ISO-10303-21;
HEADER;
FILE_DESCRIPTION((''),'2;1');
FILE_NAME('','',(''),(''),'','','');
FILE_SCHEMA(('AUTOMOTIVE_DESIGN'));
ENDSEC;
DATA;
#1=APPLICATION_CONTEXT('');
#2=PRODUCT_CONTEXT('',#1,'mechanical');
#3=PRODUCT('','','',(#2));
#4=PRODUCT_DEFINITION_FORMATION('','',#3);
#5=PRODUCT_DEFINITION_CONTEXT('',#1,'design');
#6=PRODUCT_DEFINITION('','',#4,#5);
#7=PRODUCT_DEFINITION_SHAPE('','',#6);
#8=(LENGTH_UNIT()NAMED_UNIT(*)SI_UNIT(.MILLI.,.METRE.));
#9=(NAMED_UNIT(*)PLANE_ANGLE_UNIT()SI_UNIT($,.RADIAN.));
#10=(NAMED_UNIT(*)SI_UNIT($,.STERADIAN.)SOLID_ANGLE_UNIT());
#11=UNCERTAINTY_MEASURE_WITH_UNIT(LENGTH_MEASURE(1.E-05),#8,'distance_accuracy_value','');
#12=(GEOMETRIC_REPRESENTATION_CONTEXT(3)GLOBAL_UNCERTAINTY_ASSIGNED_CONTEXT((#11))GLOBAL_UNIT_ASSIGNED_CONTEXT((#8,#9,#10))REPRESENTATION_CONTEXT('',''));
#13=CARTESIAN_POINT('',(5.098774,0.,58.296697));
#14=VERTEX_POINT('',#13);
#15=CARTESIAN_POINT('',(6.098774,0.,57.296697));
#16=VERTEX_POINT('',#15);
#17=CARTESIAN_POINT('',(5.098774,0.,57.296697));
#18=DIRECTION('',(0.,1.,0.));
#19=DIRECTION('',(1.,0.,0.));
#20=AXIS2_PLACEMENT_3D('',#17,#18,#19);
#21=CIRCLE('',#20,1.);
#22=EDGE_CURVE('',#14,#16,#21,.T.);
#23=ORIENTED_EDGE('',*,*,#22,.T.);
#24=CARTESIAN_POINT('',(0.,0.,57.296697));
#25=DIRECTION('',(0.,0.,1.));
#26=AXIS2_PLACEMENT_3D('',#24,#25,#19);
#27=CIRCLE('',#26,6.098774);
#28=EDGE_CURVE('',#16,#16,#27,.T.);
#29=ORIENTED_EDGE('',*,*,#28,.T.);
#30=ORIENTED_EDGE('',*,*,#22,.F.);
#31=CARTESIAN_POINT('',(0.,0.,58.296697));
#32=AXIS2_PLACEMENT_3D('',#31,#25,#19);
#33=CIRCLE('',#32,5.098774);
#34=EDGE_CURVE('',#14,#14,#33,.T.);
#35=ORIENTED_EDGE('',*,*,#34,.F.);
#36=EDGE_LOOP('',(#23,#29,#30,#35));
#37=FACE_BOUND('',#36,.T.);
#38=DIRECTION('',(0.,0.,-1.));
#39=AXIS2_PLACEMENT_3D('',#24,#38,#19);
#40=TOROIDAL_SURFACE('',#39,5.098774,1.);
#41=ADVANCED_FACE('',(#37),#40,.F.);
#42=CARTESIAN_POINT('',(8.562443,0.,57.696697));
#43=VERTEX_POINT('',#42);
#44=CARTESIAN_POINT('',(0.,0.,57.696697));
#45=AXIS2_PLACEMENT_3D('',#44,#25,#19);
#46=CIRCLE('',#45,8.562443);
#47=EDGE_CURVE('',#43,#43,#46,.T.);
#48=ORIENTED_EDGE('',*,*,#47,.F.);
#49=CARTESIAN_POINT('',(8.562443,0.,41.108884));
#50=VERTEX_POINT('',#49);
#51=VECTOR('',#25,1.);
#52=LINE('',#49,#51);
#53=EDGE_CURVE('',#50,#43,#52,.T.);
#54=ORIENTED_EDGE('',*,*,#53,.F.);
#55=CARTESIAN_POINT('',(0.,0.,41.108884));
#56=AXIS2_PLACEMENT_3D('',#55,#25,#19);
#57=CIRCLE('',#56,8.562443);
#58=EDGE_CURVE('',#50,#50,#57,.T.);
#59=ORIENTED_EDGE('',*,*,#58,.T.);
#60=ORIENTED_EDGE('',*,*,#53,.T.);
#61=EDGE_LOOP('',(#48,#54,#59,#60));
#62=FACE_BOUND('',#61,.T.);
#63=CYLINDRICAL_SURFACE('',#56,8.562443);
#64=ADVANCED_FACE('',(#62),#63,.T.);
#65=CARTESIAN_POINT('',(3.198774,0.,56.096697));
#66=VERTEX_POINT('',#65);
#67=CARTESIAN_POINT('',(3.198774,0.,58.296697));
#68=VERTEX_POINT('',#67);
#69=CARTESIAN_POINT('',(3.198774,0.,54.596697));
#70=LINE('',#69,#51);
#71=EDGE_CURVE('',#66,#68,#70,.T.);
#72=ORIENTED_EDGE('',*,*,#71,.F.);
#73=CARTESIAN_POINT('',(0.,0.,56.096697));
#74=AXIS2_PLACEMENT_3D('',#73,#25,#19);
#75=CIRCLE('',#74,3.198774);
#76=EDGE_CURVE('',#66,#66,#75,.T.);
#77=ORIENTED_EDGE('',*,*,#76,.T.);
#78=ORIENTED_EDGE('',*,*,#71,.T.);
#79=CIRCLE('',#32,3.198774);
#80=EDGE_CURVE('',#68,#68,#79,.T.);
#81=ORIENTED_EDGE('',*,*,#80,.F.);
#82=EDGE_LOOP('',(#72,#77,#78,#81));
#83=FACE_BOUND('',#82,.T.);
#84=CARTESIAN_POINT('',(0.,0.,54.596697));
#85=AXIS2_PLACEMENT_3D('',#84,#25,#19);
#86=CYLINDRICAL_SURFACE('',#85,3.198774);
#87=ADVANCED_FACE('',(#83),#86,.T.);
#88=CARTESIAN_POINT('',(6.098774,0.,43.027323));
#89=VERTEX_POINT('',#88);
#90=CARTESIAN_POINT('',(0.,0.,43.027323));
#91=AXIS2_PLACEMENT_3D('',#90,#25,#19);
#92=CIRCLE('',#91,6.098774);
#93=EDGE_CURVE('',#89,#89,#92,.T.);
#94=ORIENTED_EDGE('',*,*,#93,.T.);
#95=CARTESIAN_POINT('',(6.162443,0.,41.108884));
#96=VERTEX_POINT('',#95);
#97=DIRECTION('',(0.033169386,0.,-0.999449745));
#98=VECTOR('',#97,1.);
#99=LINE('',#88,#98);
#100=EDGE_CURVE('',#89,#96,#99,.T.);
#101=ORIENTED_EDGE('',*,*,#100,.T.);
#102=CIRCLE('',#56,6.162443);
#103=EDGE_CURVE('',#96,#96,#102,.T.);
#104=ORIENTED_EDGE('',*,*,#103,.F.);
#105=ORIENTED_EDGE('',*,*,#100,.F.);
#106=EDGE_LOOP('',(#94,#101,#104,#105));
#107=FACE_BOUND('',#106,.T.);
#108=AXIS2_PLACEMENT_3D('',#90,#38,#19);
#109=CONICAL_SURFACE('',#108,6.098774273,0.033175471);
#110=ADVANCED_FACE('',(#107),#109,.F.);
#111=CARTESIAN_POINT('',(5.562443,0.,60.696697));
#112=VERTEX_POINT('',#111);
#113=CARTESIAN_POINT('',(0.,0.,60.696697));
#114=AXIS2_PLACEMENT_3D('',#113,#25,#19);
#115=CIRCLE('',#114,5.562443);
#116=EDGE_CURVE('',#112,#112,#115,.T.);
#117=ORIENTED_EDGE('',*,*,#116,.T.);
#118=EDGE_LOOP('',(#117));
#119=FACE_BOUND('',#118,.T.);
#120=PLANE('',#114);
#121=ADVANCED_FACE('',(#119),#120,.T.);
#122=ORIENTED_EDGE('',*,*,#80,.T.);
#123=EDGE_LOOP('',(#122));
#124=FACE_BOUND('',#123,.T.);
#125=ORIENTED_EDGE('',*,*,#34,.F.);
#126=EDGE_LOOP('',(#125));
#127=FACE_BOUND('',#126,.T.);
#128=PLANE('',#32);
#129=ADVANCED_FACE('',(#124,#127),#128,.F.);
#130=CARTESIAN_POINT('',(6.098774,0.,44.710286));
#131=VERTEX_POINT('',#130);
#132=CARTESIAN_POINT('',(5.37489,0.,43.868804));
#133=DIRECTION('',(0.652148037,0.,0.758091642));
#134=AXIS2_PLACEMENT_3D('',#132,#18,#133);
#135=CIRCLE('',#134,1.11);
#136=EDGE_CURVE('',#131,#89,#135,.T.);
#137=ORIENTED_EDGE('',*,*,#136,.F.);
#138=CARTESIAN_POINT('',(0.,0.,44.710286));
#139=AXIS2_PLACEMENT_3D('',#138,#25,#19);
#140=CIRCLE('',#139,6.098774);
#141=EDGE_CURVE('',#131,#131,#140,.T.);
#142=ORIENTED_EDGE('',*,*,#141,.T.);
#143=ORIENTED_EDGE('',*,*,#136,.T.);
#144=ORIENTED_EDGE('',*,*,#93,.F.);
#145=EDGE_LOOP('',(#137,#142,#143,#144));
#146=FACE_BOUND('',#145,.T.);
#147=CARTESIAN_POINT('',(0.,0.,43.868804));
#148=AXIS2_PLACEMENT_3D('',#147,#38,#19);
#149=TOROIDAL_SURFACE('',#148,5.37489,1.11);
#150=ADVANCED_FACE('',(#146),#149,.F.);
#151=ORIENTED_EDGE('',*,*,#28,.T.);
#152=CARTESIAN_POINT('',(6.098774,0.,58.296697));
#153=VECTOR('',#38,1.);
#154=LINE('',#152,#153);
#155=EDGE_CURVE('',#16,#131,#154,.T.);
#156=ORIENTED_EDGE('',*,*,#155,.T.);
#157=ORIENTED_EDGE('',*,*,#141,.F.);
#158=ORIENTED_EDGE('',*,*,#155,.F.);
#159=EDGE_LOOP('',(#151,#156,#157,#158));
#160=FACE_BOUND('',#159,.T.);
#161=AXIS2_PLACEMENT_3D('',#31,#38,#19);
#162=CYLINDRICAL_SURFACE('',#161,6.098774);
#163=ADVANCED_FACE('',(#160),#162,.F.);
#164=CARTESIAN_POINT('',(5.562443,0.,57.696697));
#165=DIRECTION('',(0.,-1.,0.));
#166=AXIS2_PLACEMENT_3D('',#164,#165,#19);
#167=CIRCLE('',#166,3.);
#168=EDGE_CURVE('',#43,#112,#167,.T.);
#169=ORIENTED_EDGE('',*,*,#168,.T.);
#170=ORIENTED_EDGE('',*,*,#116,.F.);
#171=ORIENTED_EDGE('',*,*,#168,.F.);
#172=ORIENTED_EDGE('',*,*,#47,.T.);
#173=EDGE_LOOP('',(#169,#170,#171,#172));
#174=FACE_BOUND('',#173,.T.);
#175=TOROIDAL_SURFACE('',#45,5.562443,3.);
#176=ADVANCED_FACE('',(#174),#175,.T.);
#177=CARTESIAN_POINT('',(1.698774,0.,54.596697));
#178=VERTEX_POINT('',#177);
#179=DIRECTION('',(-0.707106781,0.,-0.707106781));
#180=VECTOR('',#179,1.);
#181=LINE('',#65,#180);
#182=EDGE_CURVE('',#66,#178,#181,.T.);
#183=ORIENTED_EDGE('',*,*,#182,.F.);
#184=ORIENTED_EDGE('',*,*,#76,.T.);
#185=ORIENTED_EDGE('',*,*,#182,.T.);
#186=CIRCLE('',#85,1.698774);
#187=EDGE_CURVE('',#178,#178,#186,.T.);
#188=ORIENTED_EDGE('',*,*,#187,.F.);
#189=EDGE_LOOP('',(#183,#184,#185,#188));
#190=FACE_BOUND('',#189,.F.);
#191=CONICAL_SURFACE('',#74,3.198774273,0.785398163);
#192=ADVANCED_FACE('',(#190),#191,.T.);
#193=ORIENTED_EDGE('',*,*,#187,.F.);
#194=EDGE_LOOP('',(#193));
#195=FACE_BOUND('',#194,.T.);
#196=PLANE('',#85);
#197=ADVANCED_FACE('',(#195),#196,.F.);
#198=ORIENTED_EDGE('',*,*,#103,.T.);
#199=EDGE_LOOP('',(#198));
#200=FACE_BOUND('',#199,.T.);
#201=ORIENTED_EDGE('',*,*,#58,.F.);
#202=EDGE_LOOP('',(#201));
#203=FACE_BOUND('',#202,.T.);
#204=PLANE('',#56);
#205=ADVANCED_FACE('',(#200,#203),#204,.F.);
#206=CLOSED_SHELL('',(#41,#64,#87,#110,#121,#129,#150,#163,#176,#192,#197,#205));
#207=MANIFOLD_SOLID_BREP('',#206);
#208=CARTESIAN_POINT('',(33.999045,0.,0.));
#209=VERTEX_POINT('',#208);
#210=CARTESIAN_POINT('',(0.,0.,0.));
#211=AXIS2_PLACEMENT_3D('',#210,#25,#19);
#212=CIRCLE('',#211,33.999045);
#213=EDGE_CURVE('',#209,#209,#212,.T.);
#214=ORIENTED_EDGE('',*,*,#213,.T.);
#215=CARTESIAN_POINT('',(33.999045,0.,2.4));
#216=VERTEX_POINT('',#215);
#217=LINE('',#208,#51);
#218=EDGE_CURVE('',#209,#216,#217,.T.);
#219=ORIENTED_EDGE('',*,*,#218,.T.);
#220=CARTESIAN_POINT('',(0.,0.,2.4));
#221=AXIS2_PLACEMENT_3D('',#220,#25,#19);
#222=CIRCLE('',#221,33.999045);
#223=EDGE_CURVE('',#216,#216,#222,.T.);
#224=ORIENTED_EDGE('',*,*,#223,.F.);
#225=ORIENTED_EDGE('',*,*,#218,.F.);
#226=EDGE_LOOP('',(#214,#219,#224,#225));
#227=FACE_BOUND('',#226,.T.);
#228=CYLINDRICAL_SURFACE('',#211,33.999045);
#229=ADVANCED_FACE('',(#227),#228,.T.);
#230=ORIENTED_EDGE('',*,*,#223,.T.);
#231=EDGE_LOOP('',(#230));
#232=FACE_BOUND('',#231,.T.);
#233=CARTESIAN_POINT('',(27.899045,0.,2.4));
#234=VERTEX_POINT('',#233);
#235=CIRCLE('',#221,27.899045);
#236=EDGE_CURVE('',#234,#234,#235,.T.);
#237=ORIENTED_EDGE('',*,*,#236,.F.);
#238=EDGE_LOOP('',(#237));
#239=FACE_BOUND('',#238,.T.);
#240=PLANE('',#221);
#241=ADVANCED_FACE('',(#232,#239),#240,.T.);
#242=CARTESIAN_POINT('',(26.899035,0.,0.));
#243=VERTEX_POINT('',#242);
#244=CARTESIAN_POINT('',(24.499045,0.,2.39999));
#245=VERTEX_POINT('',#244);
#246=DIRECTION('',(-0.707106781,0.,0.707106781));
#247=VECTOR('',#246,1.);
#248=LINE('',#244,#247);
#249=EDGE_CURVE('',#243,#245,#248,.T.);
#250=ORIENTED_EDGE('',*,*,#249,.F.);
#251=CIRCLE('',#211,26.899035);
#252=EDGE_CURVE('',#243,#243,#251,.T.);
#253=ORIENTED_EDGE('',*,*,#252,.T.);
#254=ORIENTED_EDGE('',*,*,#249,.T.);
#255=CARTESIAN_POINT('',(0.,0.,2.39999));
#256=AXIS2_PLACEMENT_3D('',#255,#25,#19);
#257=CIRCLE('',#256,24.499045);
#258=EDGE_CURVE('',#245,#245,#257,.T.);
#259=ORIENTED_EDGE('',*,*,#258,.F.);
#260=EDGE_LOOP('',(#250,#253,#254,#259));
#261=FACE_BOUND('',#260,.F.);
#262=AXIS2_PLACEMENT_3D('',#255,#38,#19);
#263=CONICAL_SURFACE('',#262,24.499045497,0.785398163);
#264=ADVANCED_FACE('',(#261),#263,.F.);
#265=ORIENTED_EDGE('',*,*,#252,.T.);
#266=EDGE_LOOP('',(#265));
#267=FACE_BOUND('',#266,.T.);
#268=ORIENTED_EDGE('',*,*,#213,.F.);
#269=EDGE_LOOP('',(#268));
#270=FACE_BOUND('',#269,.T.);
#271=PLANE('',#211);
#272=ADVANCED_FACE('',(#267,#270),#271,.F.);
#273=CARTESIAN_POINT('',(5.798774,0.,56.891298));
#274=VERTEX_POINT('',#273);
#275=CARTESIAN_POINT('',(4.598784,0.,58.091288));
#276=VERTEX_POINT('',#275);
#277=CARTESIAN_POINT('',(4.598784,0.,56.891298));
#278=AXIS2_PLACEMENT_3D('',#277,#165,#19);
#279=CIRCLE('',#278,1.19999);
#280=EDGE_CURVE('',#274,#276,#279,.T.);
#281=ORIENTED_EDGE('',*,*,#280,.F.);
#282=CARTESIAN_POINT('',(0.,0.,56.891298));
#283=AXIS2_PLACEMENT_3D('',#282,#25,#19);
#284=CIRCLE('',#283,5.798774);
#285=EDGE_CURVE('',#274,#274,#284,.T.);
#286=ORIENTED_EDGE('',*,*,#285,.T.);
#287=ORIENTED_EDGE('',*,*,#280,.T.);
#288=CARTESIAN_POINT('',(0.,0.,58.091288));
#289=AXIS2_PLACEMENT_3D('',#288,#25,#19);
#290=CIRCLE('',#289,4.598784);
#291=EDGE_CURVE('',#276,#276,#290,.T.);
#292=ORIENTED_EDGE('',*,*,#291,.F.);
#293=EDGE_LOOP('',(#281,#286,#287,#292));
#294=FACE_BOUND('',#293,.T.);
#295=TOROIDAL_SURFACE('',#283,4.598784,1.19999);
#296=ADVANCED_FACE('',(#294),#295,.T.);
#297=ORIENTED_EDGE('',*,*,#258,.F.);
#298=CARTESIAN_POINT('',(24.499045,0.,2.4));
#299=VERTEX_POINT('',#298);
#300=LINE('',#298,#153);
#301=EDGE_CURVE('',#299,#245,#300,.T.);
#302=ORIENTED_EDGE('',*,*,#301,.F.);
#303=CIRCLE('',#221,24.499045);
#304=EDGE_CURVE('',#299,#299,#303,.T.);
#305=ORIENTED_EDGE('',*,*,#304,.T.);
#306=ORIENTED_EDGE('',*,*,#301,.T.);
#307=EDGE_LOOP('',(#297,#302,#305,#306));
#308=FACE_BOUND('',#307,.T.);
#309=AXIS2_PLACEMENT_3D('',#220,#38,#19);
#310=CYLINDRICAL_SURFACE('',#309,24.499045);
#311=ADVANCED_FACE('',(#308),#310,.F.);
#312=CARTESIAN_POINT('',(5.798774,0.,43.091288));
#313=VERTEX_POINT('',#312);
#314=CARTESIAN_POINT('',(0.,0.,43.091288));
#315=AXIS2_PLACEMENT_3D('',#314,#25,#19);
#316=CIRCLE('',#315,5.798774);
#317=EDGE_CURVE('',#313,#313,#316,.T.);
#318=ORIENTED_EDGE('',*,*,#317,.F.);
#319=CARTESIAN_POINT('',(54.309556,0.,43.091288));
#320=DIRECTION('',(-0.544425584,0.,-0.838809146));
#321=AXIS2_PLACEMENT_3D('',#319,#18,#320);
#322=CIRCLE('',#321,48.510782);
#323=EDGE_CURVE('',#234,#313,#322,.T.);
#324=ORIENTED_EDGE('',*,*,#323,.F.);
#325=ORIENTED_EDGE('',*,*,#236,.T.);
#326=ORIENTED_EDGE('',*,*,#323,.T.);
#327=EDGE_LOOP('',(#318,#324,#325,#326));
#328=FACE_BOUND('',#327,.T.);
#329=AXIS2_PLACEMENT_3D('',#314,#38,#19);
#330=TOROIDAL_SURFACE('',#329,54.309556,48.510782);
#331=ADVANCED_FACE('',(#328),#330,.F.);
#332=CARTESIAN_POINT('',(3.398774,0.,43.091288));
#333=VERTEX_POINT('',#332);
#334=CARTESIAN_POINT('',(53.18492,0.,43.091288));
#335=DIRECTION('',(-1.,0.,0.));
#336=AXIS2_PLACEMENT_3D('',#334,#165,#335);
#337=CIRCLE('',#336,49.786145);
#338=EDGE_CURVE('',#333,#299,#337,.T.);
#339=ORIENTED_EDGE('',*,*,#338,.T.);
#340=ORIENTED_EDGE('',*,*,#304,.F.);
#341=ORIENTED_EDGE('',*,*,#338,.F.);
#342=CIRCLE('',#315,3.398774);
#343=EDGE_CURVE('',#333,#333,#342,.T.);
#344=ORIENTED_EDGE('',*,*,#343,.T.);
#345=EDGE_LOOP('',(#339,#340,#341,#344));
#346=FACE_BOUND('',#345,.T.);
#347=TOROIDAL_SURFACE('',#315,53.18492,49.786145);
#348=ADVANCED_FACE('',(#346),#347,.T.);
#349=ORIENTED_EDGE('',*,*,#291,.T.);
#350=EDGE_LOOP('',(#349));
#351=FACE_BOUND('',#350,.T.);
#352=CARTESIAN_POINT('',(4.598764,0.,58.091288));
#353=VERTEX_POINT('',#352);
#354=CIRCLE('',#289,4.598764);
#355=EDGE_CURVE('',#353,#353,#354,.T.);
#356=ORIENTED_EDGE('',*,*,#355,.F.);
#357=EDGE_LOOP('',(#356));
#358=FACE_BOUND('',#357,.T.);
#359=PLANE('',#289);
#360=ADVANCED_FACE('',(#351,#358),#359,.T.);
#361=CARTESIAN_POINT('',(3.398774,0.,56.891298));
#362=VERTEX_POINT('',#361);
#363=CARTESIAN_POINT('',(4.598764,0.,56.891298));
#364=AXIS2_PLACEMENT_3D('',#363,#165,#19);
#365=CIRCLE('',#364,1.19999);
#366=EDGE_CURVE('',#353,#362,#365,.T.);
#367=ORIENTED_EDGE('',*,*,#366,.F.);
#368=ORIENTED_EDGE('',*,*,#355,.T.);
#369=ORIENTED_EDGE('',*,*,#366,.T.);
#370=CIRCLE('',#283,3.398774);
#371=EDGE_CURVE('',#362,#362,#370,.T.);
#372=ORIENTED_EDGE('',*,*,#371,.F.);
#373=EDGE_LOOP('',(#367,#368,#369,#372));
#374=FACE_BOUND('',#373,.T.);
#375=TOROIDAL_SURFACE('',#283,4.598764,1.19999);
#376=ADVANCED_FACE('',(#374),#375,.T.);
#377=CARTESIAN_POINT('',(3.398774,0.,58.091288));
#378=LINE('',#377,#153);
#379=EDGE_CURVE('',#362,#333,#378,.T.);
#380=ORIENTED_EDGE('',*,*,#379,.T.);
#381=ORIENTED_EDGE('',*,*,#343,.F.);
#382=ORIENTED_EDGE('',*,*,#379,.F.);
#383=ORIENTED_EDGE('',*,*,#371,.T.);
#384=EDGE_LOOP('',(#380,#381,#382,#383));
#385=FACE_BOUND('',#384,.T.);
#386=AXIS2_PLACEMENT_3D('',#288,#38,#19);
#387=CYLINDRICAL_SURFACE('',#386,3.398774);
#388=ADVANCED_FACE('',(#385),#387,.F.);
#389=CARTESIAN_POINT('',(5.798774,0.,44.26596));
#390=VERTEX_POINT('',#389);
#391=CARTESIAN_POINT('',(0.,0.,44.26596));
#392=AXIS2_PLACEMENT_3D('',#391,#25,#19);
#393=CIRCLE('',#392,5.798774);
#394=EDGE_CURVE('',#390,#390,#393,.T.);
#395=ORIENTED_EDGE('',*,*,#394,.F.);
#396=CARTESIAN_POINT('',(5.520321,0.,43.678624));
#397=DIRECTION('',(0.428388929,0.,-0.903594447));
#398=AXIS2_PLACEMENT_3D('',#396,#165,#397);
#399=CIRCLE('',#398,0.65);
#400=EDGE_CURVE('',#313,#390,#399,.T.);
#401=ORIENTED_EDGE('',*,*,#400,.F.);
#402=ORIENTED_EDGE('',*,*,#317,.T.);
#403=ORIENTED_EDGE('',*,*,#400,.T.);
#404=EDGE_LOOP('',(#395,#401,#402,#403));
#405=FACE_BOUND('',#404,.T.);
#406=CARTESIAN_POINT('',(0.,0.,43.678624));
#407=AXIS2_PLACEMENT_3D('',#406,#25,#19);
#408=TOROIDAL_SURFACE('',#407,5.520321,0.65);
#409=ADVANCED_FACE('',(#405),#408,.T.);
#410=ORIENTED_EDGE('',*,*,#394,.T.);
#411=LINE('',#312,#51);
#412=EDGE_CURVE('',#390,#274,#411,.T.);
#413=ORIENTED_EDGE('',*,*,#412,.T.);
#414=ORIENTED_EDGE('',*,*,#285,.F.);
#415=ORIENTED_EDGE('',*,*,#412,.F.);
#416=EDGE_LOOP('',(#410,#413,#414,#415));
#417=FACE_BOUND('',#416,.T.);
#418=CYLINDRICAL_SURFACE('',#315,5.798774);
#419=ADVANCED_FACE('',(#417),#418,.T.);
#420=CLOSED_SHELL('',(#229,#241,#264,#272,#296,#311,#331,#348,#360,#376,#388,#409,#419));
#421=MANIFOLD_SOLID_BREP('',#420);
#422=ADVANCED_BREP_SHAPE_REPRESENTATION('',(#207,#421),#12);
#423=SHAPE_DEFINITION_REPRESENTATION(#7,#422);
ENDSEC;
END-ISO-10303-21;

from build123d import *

# Parameters (mm, degrees)
F2_R    = 1.19999
F5_R    = 3
F6_SIZE = 1.5
F7_SIZE = 2.39999
F8_R    = 1


# Not quite as in the source:
# - a fillet or chamfer is up to 0.001 mm smaller than in the source, because OpenCascade refuses the exact size
# - a feature names something its author has since deleted; it is built from what else it names


with BuildPart() as f1:
    # F0 (on Front) → F1 (revolve)
    with BuildSketch(Plane.XZ):
        with BuildLine():
            Line((24.4990454972, 2.4), (24.4990454972, 0))
            Line((24.4990454972, 0), (33.9990454972, 0))
            Line((33.9990454972, 0), (33.9990454972, 2.4))
            Line((33.9990454972, 2.4), (27.8990454972, 2.4))
            ThreePointArc((27.8990454972, 2.4), (11.680396645, 19.9385185195), (5.7987742726, 43.0912876998))
            Line((5.7987742726, 43.0912876998), (5.7987742726, 44.2659604814))
            Line((5.7987742726, 44.2659604814), (5.7987742726, 58.0912876998))
            Line((5.7987742726, 58.0912876998), (3.3987742726, 58.0912876998))
            Line((3.3987742726, 58.0912876998), (3.3987742726, 43.0912876998))
            ThreePointArc((3.3987742726, 43.0912876998), (8.9875250867, 20.1729416621), (24.4990454972, 2.4))
        make_face()
        with BuildLine():
            Line((5.7987742726, 44.2659604814), (5.7987742726, 43.0912876998))
            ThreePointArc((5.7987742726, 43.0912876998), (6.1703214686, 43.6786240906), (5.7987742726, 44.2659604814))
        make_face()
    revolve(axis=Axis((0, 0, 21.5), (0, 0, 1)))

    # F2 (radius 1.2 in the source; OpenCascade refuses exactly that, so slightly less here)
    f2_edges = [f1.edges().sort_by_distance(p)[0] for p in [
        (-5.798774, 0, 58.091288),
        (-3.398774, 0, 58.091288),
    ]]
    fillet(f2_edges, radius=F2_R)

    # F7 (size 2.4 in the source; OpenCascade refuses exactly that, so slightly less here)
    f7_edges = [f1.edges().sort_by_distance(p)[0] for p in [
        (-24.499045, 0, 0),
    ]]
    chamfer(f7_edges, length=F7_SIZE)


with BuildPart() as f4:
    # F3 (on Front) → F4 (revolve)
    with BuildSketch(Plane.XZ):
        with BuildLine():
            Line((3.1987742726, 58.2966972564), (6.0987742726, 58.2966972564))
            Line((6.0987742726, 58.2966972564), (6.0987742726, 44.7102859616))
            ThreePointArc((6.0987742726, 44.7102859616), (6.4848899514, 43.868804239), (6.0987742726, 43.0273225163))
            Line((6.0987742726, 43.0273225163), (6.1624427434, 41.1088836943))
            Line((6.1624427434, 41.1088836943), (8.5624427434, 41.1088836943))
            Line((8.5624427434, 41.1088836943), (8.5624427434, 60.6966972564))
            Line((8.5624427434, 60.6966972564), (0, 60.6966972564))
            Line((0, 60.6966972564), (0, 54.5966972564))
            Line((0, 54.5966972564), (3.1987742726, 54.5966972564))
            Line((3.1987742726, 54.5966972564), (3.1987742726, 58.2966972564))
        make_face()
    revolve(axis=Axis((0, 0, 21.5), (0, 0, 1)))

    # F5
    f5_edges = [f4.edges().sort_by_distance(p)[0] for p in [
        (-8.562443, 0, 60.696697),
    ]]
    fillet(f5_edges, radius=F5_R)

    # F6
    f6_edges = [f4.edges().sort_by_distance(p)[0] for p in [
        (-3.198774, 0, 54.596697),
    ]]
    chamfer(f6_edges, length=F6_SIZE)

    # F8
    f8_edges = [f4.edges().sort_by_distance(p)[0] for p in [
        (-6.098774, 0, 58.296697),
    ]]
    fillet(f8_edges, radius=F8_R)


solid = Compound([f1.part, f4.part])
